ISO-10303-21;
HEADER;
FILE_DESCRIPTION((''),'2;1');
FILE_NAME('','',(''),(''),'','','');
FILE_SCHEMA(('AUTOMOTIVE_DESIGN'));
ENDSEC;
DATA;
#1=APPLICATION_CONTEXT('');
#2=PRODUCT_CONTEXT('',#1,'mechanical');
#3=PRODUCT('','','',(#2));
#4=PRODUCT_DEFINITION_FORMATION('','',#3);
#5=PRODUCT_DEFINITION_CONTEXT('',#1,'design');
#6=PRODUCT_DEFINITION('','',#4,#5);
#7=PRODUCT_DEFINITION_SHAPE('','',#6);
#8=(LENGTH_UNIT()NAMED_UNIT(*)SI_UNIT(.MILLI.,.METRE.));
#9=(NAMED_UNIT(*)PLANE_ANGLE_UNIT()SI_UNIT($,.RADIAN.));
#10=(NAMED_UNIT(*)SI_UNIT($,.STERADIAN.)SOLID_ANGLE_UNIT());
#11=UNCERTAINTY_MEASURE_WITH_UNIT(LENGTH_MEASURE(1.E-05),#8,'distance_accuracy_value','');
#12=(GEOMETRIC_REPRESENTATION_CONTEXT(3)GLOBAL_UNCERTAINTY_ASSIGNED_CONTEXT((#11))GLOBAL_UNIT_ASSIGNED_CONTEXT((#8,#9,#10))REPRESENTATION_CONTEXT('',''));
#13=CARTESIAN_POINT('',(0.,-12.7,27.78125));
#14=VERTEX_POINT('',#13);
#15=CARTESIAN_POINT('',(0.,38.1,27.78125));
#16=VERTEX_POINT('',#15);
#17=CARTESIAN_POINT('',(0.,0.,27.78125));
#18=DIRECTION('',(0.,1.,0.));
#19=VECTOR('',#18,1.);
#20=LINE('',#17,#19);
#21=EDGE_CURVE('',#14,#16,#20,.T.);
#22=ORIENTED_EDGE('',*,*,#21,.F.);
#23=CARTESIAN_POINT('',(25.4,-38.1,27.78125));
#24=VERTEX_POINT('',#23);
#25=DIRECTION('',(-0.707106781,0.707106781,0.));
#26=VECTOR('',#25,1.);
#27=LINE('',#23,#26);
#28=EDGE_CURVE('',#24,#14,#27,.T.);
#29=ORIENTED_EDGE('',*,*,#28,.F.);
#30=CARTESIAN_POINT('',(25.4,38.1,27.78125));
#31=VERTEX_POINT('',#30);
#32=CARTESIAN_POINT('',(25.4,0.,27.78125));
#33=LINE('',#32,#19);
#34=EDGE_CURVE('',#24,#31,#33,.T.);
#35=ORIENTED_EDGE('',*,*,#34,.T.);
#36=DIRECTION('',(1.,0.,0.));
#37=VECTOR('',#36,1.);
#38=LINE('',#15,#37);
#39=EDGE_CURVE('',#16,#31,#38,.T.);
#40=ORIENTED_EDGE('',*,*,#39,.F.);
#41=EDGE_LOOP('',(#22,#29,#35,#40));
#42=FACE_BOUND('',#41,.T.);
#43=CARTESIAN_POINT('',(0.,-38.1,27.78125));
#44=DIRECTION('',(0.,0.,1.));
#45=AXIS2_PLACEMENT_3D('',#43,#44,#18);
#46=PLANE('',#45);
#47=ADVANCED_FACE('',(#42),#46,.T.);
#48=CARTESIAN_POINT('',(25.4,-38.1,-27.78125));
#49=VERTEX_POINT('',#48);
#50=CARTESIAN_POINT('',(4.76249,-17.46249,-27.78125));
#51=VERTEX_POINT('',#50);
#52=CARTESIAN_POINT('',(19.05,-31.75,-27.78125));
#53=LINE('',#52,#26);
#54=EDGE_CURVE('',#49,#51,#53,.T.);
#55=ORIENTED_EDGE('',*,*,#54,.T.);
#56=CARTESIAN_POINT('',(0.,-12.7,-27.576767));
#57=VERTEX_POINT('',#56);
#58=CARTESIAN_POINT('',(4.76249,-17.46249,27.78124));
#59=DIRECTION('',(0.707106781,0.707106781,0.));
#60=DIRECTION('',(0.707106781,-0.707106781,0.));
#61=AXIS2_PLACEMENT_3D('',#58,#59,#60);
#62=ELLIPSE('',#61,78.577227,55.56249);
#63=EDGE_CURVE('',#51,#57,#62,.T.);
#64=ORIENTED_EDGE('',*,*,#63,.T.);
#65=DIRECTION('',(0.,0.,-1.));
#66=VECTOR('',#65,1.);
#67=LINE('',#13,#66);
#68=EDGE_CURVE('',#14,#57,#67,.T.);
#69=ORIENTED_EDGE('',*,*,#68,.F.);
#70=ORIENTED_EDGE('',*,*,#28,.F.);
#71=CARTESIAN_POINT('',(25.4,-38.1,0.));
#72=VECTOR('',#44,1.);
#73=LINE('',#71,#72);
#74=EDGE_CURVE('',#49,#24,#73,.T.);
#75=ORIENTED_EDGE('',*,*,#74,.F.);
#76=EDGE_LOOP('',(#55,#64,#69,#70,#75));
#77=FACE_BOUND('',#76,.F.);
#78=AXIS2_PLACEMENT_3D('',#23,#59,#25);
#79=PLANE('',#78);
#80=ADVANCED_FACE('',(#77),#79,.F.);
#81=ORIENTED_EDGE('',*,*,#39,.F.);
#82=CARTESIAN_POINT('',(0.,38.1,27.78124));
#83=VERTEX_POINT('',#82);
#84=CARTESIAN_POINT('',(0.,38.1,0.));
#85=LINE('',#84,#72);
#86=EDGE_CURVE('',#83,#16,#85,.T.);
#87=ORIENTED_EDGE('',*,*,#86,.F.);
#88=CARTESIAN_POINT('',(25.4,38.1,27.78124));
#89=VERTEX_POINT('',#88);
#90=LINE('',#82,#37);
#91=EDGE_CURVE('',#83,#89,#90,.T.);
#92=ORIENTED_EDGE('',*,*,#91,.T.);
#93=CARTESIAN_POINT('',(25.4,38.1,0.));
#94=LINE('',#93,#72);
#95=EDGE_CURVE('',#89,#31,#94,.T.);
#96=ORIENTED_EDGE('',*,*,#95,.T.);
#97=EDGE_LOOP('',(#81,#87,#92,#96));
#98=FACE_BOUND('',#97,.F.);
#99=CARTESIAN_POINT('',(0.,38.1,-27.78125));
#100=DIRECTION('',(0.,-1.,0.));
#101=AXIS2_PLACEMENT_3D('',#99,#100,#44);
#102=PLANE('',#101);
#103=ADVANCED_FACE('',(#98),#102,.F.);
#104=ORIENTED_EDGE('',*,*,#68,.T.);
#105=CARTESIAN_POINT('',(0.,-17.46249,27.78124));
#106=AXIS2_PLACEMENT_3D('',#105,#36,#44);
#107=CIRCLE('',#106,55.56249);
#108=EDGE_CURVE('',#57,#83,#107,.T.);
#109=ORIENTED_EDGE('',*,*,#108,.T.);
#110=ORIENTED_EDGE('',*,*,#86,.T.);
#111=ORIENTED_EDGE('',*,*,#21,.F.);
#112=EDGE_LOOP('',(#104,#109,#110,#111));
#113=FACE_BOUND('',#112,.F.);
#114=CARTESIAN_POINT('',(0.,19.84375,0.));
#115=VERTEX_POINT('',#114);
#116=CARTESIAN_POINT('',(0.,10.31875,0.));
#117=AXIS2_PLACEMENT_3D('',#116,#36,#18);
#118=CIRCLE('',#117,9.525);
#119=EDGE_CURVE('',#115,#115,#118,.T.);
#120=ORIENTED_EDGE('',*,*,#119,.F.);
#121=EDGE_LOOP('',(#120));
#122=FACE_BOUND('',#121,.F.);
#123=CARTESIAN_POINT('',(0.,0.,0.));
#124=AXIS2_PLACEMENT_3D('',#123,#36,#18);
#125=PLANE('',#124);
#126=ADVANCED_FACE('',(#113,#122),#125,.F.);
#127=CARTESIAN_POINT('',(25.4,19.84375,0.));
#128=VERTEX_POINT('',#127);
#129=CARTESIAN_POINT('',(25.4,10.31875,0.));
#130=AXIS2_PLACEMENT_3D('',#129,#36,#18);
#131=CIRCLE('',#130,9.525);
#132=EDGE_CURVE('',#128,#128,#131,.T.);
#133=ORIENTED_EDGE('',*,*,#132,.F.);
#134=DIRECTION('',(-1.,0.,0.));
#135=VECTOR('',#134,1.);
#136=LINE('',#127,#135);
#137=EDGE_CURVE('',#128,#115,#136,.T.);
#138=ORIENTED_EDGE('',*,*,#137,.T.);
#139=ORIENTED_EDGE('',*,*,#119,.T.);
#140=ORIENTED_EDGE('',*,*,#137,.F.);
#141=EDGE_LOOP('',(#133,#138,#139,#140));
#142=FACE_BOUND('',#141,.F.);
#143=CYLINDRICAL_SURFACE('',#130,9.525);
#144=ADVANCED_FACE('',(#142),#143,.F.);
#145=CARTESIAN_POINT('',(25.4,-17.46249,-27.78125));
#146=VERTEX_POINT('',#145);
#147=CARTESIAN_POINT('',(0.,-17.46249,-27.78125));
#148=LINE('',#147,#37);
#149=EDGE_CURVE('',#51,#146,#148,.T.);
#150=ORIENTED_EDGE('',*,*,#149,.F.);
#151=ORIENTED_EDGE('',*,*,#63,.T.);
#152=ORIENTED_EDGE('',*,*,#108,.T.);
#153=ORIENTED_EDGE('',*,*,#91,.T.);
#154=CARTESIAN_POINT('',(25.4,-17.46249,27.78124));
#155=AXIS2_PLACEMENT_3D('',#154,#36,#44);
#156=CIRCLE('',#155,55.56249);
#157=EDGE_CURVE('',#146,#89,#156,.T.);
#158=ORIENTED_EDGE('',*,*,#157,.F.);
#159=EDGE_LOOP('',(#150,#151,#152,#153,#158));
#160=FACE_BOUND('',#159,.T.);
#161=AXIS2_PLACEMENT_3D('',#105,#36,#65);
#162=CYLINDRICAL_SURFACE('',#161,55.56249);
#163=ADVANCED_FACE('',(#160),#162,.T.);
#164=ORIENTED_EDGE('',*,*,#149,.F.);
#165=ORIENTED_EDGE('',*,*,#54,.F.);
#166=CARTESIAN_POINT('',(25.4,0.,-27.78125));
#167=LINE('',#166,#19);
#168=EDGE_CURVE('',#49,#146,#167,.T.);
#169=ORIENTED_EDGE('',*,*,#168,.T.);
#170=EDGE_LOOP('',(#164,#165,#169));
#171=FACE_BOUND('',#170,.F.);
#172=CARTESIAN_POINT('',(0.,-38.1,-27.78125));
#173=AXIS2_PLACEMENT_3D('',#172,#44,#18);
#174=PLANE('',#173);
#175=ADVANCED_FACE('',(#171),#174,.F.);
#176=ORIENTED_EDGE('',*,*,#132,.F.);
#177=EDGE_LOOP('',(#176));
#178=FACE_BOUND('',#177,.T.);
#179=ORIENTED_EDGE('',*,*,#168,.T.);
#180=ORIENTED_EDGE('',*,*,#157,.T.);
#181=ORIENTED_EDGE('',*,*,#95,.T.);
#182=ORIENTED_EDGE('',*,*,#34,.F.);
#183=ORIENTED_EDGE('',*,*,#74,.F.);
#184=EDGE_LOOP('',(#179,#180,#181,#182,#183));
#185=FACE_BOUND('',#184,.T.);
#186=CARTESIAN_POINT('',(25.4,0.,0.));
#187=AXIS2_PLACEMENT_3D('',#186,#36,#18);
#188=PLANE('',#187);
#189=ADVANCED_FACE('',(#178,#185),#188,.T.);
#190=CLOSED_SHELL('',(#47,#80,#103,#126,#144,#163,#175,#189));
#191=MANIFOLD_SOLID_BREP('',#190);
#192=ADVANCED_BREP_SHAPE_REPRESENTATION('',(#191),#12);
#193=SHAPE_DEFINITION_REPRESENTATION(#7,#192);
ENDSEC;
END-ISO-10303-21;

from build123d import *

# Parameters (mm, degrees)
F0_W     = 76.2
F0_H     = 55.5625
F1_DEPTH = 25.4
F2_R     = 55.56249
F3_R     = 9.525
F4_DEPTH = 25.4
F6_DEPTH = 55.5635


# Not quite as in the source:
# - a fillet or chamfer is up to 0.001 mm smaller than in the source, because OpenCascade refuses the exact size


with BuildPart() as f1:
    # F0 (on Right) → F1 (new body)
    with BuildSketch(Plane.YZ):
        Rectangle(F0_W, F0_H)
    extrude(amount=F1_DEPTH)

    # F2 (radius 55.5625 in the source; OpenCascade refuses exactly that, so slightly less here)
    f2_edges = [f1.edges().sort_by_distance(p)[0] for p in [
        (12.7, 38.1, -27.78125),
    ]]
    fillet(f2_edges, radius=F2_R)

    # F3 (on face) → F4 (cut)
    with BuildSketch(Plane.YZ.offset(25.4)):
        with Locations((10.31875, 0)):
            Circle(F3_R)
    extrude(amount=-F4_DEPTH, mode=Mode.SUBTRACT)

    # F5 (on face) → F6 (cut, through all)
    with BuildSketch(Plane.XY.offset(27.78125)):
        Polygon((0, -38.1), (25.4, -38.1), (0, -12.7), align=None)
    extrude(amount=-F6_DEPTH, mode=Mode.SUBTRACT)


solid = f1.part
